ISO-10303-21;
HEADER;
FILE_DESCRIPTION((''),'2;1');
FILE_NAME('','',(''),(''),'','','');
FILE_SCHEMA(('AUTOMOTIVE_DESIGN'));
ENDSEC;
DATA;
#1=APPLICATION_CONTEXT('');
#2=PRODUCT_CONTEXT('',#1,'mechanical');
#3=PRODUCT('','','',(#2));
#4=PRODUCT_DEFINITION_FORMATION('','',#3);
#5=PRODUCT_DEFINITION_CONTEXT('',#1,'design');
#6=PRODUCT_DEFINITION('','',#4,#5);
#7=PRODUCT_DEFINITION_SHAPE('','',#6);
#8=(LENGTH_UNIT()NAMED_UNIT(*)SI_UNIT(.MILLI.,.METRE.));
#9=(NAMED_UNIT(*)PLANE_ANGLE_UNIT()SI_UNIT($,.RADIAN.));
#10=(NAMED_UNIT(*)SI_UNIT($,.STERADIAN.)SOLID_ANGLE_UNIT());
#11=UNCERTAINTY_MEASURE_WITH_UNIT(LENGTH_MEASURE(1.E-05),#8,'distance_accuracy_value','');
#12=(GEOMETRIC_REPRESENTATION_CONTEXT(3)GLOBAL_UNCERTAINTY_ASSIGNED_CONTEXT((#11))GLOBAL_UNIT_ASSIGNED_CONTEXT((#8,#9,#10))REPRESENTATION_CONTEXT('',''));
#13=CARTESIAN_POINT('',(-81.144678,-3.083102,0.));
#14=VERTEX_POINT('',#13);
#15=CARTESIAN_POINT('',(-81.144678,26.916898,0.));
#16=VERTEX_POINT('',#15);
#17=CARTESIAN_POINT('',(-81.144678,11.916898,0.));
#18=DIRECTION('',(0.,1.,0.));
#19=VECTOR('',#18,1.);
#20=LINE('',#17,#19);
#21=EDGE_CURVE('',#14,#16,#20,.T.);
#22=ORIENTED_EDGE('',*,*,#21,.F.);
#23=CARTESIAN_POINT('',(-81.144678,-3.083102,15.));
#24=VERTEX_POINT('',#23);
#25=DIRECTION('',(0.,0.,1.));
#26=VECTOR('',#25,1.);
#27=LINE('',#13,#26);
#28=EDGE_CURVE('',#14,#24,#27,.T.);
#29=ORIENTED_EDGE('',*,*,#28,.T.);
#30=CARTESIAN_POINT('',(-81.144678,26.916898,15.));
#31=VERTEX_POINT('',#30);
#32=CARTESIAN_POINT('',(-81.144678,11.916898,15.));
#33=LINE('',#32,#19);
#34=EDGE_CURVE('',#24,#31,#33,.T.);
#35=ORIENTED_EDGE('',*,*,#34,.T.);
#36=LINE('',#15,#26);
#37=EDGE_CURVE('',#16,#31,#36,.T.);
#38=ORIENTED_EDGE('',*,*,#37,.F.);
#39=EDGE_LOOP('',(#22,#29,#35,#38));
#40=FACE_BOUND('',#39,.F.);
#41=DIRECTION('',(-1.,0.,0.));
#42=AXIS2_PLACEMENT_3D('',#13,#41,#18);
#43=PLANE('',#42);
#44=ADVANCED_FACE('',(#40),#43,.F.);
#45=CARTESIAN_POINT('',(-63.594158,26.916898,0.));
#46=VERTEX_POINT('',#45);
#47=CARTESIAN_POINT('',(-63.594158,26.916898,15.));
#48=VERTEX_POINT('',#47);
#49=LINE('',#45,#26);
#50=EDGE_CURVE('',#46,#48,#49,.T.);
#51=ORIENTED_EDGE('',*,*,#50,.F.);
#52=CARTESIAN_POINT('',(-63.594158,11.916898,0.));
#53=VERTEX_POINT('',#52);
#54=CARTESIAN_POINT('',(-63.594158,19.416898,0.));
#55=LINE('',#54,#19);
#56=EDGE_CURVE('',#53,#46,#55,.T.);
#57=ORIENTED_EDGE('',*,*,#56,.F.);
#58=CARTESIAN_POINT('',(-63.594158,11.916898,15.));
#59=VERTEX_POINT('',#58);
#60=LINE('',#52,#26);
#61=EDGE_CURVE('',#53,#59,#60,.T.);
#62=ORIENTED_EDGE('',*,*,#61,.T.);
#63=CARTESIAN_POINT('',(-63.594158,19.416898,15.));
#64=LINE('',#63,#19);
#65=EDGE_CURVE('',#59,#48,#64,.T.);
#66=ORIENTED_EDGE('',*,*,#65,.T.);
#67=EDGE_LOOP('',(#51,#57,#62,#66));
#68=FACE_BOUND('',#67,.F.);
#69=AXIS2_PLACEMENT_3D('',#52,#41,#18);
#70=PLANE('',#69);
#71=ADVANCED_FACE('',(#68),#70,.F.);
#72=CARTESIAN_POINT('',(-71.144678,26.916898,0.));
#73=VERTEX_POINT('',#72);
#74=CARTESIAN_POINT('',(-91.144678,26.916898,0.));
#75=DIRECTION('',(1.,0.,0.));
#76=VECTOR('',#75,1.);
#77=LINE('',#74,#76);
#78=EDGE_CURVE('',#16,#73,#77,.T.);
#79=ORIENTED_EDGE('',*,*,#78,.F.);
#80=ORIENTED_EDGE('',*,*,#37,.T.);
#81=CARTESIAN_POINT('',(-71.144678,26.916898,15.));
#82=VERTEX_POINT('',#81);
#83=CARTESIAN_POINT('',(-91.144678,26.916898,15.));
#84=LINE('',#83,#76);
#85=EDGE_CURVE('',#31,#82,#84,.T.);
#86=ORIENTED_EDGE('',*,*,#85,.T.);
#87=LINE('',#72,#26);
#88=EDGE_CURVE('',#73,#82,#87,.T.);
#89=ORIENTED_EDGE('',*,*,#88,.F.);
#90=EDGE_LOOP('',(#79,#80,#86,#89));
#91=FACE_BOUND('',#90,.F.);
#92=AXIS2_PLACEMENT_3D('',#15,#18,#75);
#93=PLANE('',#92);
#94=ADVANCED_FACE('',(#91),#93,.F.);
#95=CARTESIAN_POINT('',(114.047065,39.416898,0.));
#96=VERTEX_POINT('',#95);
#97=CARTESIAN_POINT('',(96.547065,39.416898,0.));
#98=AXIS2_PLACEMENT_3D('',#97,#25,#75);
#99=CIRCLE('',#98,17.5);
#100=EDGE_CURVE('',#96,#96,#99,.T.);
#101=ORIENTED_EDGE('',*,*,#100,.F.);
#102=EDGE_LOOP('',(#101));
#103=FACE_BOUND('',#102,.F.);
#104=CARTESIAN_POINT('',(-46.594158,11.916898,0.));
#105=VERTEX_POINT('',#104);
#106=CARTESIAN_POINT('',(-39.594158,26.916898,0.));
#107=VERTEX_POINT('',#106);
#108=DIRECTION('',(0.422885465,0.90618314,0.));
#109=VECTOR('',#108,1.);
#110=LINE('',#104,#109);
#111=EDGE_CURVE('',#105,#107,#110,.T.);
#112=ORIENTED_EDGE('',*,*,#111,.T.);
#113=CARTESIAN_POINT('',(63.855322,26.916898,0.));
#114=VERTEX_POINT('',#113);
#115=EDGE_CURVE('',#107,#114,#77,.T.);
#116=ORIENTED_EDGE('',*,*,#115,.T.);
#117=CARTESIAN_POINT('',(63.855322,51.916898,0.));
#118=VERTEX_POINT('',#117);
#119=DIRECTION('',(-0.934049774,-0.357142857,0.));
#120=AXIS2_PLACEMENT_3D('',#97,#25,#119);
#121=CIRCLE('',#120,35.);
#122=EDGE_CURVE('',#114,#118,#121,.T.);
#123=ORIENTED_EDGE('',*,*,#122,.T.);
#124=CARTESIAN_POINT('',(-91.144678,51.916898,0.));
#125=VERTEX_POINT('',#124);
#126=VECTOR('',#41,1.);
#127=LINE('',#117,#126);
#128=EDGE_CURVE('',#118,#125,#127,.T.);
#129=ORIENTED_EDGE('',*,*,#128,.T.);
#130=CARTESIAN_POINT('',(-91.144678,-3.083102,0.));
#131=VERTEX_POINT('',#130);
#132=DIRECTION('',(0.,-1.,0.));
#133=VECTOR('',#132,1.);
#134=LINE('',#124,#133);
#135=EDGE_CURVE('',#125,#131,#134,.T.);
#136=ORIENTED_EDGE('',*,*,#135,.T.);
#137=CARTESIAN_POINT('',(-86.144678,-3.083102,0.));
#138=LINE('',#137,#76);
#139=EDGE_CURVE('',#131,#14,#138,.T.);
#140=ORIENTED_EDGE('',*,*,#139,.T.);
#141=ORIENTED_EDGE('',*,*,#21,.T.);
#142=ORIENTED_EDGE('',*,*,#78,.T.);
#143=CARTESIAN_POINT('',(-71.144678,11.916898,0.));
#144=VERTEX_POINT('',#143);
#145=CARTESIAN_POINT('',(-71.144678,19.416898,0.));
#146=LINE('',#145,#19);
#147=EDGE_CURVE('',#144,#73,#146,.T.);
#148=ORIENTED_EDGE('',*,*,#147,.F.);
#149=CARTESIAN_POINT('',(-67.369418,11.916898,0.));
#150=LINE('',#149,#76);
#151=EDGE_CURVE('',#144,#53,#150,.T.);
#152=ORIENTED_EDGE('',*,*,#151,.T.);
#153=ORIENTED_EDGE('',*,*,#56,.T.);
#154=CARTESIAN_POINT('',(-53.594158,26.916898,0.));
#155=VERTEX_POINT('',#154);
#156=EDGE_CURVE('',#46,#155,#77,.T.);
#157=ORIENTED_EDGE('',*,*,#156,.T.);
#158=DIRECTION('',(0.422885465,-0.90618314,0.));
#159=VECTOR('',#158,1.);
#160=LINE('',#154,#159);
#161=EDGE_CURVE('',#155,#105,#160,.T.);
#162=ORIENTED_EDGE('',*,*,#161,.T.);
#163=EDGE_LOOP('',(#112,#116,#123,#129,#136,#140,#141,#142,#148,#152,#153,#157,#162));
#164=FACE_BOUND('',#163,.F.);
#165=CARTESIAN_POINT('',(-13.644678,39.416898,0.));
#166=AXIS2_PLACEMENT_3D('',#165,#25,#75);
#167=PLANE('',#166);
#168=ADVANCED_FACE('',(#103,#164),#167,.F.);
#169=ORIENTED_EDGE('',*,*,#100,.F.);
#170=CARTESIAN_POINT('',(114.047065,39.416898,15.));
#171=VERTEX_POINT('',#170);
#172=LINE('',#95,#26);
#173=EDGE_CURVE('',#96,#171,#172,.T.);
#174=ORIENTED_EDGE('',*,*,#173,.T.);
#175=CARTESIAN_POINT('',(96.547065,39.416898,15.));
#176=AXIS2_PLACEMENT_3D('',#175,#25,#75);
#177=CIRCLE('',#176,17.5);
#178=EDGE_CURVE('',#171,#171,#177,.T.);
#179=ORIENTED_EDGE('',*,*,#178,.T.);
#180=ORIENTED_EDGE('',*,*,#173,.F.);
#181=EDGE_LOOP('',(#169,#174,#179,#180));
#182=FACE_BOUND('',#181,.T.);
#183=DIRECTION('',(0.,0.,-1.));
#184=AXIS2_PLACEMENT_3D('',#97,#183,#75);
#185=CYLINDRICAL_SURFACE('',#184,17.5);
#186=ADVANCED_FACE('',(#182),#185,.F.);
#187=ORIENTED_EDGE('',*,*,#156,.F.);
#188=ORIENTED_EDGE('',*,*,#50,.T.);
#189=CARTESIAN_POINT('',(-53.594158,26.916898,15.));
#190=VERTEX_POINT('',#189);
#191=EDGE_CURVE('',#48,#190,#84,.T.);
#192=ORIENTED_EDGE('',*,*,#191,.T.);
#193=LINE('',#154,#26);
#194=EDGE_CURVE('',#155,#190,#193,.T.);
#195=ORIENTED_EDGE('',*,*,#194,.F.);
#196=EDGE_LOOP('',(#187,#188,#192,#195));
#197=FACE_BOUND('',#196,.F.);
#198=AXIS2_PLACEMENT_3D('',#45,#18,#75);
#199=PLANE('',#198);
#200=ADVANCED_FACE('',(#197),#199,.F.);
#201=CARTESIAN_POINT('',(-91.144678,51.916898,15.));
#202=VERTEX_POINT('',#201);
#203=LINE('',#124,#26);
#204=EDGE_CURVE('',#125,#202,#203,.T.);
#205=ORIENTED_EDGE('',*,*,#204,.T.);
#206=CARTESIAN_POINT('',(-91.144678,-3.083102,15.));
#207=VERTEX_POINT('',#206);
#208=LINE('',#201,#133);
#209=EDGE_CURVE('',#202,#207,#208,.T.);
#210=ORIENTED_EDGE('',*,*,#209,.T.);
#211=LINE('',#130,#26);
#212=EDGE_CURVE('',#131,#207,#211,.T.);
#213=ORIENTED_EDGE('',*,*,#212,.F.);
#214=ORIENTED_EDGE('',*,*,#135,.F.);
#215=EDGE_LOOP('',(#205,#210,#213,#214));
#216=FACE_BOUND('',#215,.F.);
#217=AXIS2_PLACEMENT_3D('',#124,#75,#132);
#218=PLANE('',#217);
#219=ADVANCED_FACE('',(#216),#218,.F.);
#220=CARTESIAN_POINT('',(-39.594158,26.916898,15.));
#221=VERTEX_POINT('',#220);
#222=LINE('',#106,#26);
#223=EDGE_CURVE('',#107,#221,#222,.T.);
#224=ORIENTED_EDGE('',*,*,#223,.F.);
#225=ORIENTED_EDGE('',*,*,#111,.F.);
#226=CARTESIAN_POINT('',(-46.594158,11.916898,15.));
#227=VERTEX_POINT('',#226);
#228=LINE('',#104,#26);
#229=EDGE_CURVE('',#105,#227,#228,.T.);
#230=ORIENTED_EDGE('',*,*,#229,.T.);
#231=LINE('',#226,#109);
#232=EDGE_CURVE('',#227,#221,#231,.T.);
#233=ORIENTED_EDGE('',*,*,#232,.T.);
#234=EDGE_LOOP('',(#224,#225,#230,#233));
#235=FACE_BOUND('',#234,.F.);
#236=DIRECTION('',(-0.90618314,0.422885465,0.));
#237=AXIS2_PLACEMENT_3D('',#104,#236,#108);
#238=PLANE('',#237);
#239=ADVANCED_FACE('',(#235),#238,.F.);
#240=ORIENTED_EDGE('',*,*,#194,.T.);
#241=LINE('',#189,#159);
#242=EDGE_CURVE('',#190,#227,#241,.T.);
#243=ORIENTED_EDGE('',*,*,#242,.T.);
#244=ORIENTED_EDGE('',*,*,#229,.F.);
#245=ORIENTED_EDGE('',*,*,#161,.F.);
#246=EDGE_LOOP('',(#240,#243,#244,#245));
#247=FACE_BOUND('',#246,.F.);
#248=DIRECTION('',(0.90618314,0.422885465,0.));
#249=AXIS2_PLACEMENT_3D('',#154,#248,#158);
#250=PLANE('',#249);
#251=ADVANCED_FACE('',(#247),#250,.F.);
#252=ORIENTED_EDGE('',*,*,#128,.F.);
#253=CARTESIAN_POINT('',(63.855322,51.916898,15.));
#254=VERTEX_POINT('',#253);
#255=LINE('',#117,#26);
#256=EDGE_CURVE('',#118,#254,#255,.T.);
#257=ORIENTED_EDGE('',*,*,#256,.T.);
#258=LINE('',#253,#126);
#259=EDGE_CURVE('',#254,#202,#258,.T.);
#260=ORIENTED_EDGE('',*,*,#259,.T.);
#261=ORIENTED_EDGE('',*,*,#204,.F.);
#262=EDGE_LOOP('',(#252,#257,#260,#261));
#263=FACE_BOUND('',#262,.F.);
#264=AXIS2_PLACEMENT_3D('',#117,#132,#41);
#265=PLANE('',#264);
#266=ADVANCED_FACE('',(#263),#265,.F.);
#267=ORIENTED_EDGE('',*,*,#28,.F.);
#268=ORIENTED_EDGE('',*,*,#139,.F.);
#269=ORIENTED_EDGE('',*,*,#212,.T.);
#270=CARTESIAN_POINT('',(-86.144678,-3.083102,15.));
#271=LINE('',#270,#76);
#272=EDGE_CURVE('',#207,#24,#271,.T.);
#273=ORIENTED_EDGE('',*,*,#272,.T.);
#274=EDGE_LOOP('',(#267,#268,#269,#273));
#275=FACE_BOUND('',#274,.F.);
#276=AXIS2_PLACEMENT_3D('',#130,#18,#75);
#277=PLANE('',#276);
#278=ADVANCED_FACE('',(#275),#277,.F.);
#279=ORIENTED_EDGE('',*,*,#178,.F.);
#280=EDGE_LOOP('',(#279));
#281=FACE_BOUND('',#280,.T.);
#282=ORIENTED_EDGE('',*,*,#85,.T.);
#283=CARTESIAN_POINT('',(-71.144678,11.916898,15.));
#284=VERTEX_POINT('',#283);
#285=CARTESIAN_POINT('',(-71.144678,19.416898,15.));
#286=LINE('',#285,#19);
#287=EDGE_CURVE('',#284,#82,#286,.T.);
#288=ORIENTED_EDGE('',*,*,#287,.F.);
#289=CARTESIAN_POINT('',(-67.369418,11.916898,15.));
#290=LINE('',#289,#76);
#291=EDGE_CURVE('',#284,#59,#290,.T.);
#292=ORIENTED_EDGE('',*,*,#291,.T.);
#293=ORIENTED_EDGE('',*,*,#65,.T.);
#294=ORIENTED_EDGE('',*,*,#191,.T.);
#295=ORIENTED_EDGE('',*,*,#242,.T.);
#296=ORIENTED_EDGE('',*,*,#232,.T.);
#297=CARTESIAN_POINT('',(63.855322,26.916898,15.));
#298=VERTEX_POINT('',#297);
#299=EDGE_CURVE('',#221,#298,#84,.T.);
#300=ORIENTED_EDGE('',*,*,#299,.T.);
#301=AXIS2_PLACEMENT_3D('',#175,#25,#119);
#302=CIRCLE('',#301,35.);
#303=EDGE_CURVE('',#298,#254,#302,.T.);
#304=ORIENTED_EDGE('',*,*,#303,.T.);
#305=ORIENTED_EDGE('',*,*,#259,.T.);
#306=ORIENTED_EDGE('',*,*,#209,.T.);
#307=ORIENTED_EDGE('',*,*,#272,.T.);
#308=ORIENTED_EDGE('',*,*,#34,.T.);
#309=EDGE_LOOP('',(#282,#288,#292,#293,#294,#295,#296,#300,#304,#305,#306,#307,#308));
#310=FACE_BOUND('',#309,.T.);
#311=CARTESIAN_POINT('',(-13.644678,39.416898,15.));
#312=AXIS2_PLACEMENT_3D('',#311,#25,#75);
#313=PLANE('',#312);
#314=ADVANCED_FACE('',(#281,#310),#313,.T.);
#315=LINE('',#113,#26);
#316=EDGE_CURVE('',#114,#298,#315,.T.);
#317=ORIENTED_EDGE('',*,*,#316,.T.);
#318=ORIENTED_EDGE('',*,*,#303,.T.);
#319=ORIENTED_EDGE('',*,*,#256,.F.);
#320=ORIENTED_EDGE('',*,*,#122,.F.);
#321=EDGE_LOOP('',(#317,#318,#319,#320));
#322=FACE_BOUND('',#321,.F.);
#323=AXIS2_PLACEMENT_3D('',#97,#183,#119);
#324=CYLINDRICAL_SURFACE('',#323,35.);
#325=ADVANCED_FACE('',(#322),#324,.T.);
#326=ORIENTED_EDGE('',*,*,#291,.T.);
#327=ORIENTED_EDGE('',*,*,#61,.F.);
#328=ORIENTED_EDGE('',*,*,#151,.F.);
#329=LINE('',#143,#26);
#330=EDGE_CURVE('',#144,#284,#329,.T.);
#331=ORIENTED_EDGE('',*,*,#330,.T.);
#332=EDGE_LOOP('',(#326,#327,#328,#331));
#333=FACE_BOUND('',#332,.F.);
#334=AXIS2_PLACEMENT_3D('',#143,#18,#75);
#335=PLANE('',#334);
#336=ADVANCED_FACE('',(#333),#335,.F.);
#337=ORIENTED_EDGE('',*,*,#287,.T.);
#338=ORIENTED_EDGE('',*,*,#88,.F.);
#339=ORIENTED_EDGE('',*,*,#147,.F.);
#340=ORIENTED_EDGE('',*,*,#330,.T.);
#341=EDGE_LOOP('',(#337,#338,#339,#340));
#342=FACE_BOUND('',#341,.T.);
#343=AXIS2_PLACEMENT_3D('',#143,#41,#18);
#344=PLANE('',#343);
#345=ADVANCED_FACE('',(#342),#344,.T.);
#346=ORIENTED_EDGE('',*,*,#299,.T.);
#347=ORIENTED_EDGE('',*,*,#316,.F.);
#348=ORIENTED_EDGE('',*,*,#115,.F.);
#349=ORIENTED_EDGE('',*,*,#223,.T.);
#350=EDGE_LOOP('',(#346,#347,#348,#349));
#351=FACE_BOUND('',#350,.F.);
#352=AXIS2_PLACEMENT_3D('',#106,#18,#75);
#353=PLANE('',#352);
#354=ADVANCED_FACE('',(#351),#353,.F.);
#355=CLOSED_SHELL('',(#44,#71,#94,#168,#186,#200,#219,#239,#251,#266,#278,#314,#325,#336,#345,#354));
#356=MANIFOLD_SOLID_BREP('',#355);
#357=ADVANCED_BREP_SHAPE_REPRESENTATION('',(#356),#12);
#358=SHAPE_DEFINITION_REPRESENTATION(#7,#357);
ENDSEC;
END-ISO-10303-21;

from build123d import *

# Parameters (mm, degrees)
F0_W     = 7.5505197141
F0_H     = 15
F0_W_2   = 10
F0_H_2   = 30
F0_R     = 17.5
F1_DEPTH = 15


# Not quite as in the source:
# - a feature of the source that left no trace in its solid (it failed there, or was rolled back) is left out


with BuildPart() as f1:
    # F0 (on Top) → F1 (new body)
    with BuildSketch(Plane.XY):
        Polygon((63.855322471, 51.9168977576), (-91.144677529, 51.9168977576), (-91.144677529, 26.9168977576), (-81.144677529, 26.9168977576), (-71.144677529, 26.9168977576), (-63.594157815, 26.9168977576), (-53.594157815, 26.9168977576), (-46.594157815, 26.9168977576), (-39.594157815, 26.9168977576), (63.855322471, 26.9168977576), align=None)
        Polygon((-46.594157815, 11.9168977576), (-39.594157815, 26.9168977576), (-46.594157815, 26.9168977576), (-53.594157815, 26.9168977576), align=None)
        with Locations((-67.369417672, 19.4168977576)):
            Rectangle(F0_W, F0_H)
        with Locations((-86.144677529, 11.9168977576)):
            Rectangle(F0_W_2, F0_H_2)
        with BuildLine():
            ThreePointArc((63.855322471, 26.9168977576), (131.5470645475, 39.4168977576), (63.855322471, 51.9168977576))
            Line((63.855322471, 51.9168977576), (63.855322471, 26.9168977576))
        make_face()
        with Locations((96.5470645475, 39.4168977576)):
            Circle(F0_R, mode=Mode.SUBTRACT)
    extrude(amount=F1_DEPTH)


solid = f1.part
